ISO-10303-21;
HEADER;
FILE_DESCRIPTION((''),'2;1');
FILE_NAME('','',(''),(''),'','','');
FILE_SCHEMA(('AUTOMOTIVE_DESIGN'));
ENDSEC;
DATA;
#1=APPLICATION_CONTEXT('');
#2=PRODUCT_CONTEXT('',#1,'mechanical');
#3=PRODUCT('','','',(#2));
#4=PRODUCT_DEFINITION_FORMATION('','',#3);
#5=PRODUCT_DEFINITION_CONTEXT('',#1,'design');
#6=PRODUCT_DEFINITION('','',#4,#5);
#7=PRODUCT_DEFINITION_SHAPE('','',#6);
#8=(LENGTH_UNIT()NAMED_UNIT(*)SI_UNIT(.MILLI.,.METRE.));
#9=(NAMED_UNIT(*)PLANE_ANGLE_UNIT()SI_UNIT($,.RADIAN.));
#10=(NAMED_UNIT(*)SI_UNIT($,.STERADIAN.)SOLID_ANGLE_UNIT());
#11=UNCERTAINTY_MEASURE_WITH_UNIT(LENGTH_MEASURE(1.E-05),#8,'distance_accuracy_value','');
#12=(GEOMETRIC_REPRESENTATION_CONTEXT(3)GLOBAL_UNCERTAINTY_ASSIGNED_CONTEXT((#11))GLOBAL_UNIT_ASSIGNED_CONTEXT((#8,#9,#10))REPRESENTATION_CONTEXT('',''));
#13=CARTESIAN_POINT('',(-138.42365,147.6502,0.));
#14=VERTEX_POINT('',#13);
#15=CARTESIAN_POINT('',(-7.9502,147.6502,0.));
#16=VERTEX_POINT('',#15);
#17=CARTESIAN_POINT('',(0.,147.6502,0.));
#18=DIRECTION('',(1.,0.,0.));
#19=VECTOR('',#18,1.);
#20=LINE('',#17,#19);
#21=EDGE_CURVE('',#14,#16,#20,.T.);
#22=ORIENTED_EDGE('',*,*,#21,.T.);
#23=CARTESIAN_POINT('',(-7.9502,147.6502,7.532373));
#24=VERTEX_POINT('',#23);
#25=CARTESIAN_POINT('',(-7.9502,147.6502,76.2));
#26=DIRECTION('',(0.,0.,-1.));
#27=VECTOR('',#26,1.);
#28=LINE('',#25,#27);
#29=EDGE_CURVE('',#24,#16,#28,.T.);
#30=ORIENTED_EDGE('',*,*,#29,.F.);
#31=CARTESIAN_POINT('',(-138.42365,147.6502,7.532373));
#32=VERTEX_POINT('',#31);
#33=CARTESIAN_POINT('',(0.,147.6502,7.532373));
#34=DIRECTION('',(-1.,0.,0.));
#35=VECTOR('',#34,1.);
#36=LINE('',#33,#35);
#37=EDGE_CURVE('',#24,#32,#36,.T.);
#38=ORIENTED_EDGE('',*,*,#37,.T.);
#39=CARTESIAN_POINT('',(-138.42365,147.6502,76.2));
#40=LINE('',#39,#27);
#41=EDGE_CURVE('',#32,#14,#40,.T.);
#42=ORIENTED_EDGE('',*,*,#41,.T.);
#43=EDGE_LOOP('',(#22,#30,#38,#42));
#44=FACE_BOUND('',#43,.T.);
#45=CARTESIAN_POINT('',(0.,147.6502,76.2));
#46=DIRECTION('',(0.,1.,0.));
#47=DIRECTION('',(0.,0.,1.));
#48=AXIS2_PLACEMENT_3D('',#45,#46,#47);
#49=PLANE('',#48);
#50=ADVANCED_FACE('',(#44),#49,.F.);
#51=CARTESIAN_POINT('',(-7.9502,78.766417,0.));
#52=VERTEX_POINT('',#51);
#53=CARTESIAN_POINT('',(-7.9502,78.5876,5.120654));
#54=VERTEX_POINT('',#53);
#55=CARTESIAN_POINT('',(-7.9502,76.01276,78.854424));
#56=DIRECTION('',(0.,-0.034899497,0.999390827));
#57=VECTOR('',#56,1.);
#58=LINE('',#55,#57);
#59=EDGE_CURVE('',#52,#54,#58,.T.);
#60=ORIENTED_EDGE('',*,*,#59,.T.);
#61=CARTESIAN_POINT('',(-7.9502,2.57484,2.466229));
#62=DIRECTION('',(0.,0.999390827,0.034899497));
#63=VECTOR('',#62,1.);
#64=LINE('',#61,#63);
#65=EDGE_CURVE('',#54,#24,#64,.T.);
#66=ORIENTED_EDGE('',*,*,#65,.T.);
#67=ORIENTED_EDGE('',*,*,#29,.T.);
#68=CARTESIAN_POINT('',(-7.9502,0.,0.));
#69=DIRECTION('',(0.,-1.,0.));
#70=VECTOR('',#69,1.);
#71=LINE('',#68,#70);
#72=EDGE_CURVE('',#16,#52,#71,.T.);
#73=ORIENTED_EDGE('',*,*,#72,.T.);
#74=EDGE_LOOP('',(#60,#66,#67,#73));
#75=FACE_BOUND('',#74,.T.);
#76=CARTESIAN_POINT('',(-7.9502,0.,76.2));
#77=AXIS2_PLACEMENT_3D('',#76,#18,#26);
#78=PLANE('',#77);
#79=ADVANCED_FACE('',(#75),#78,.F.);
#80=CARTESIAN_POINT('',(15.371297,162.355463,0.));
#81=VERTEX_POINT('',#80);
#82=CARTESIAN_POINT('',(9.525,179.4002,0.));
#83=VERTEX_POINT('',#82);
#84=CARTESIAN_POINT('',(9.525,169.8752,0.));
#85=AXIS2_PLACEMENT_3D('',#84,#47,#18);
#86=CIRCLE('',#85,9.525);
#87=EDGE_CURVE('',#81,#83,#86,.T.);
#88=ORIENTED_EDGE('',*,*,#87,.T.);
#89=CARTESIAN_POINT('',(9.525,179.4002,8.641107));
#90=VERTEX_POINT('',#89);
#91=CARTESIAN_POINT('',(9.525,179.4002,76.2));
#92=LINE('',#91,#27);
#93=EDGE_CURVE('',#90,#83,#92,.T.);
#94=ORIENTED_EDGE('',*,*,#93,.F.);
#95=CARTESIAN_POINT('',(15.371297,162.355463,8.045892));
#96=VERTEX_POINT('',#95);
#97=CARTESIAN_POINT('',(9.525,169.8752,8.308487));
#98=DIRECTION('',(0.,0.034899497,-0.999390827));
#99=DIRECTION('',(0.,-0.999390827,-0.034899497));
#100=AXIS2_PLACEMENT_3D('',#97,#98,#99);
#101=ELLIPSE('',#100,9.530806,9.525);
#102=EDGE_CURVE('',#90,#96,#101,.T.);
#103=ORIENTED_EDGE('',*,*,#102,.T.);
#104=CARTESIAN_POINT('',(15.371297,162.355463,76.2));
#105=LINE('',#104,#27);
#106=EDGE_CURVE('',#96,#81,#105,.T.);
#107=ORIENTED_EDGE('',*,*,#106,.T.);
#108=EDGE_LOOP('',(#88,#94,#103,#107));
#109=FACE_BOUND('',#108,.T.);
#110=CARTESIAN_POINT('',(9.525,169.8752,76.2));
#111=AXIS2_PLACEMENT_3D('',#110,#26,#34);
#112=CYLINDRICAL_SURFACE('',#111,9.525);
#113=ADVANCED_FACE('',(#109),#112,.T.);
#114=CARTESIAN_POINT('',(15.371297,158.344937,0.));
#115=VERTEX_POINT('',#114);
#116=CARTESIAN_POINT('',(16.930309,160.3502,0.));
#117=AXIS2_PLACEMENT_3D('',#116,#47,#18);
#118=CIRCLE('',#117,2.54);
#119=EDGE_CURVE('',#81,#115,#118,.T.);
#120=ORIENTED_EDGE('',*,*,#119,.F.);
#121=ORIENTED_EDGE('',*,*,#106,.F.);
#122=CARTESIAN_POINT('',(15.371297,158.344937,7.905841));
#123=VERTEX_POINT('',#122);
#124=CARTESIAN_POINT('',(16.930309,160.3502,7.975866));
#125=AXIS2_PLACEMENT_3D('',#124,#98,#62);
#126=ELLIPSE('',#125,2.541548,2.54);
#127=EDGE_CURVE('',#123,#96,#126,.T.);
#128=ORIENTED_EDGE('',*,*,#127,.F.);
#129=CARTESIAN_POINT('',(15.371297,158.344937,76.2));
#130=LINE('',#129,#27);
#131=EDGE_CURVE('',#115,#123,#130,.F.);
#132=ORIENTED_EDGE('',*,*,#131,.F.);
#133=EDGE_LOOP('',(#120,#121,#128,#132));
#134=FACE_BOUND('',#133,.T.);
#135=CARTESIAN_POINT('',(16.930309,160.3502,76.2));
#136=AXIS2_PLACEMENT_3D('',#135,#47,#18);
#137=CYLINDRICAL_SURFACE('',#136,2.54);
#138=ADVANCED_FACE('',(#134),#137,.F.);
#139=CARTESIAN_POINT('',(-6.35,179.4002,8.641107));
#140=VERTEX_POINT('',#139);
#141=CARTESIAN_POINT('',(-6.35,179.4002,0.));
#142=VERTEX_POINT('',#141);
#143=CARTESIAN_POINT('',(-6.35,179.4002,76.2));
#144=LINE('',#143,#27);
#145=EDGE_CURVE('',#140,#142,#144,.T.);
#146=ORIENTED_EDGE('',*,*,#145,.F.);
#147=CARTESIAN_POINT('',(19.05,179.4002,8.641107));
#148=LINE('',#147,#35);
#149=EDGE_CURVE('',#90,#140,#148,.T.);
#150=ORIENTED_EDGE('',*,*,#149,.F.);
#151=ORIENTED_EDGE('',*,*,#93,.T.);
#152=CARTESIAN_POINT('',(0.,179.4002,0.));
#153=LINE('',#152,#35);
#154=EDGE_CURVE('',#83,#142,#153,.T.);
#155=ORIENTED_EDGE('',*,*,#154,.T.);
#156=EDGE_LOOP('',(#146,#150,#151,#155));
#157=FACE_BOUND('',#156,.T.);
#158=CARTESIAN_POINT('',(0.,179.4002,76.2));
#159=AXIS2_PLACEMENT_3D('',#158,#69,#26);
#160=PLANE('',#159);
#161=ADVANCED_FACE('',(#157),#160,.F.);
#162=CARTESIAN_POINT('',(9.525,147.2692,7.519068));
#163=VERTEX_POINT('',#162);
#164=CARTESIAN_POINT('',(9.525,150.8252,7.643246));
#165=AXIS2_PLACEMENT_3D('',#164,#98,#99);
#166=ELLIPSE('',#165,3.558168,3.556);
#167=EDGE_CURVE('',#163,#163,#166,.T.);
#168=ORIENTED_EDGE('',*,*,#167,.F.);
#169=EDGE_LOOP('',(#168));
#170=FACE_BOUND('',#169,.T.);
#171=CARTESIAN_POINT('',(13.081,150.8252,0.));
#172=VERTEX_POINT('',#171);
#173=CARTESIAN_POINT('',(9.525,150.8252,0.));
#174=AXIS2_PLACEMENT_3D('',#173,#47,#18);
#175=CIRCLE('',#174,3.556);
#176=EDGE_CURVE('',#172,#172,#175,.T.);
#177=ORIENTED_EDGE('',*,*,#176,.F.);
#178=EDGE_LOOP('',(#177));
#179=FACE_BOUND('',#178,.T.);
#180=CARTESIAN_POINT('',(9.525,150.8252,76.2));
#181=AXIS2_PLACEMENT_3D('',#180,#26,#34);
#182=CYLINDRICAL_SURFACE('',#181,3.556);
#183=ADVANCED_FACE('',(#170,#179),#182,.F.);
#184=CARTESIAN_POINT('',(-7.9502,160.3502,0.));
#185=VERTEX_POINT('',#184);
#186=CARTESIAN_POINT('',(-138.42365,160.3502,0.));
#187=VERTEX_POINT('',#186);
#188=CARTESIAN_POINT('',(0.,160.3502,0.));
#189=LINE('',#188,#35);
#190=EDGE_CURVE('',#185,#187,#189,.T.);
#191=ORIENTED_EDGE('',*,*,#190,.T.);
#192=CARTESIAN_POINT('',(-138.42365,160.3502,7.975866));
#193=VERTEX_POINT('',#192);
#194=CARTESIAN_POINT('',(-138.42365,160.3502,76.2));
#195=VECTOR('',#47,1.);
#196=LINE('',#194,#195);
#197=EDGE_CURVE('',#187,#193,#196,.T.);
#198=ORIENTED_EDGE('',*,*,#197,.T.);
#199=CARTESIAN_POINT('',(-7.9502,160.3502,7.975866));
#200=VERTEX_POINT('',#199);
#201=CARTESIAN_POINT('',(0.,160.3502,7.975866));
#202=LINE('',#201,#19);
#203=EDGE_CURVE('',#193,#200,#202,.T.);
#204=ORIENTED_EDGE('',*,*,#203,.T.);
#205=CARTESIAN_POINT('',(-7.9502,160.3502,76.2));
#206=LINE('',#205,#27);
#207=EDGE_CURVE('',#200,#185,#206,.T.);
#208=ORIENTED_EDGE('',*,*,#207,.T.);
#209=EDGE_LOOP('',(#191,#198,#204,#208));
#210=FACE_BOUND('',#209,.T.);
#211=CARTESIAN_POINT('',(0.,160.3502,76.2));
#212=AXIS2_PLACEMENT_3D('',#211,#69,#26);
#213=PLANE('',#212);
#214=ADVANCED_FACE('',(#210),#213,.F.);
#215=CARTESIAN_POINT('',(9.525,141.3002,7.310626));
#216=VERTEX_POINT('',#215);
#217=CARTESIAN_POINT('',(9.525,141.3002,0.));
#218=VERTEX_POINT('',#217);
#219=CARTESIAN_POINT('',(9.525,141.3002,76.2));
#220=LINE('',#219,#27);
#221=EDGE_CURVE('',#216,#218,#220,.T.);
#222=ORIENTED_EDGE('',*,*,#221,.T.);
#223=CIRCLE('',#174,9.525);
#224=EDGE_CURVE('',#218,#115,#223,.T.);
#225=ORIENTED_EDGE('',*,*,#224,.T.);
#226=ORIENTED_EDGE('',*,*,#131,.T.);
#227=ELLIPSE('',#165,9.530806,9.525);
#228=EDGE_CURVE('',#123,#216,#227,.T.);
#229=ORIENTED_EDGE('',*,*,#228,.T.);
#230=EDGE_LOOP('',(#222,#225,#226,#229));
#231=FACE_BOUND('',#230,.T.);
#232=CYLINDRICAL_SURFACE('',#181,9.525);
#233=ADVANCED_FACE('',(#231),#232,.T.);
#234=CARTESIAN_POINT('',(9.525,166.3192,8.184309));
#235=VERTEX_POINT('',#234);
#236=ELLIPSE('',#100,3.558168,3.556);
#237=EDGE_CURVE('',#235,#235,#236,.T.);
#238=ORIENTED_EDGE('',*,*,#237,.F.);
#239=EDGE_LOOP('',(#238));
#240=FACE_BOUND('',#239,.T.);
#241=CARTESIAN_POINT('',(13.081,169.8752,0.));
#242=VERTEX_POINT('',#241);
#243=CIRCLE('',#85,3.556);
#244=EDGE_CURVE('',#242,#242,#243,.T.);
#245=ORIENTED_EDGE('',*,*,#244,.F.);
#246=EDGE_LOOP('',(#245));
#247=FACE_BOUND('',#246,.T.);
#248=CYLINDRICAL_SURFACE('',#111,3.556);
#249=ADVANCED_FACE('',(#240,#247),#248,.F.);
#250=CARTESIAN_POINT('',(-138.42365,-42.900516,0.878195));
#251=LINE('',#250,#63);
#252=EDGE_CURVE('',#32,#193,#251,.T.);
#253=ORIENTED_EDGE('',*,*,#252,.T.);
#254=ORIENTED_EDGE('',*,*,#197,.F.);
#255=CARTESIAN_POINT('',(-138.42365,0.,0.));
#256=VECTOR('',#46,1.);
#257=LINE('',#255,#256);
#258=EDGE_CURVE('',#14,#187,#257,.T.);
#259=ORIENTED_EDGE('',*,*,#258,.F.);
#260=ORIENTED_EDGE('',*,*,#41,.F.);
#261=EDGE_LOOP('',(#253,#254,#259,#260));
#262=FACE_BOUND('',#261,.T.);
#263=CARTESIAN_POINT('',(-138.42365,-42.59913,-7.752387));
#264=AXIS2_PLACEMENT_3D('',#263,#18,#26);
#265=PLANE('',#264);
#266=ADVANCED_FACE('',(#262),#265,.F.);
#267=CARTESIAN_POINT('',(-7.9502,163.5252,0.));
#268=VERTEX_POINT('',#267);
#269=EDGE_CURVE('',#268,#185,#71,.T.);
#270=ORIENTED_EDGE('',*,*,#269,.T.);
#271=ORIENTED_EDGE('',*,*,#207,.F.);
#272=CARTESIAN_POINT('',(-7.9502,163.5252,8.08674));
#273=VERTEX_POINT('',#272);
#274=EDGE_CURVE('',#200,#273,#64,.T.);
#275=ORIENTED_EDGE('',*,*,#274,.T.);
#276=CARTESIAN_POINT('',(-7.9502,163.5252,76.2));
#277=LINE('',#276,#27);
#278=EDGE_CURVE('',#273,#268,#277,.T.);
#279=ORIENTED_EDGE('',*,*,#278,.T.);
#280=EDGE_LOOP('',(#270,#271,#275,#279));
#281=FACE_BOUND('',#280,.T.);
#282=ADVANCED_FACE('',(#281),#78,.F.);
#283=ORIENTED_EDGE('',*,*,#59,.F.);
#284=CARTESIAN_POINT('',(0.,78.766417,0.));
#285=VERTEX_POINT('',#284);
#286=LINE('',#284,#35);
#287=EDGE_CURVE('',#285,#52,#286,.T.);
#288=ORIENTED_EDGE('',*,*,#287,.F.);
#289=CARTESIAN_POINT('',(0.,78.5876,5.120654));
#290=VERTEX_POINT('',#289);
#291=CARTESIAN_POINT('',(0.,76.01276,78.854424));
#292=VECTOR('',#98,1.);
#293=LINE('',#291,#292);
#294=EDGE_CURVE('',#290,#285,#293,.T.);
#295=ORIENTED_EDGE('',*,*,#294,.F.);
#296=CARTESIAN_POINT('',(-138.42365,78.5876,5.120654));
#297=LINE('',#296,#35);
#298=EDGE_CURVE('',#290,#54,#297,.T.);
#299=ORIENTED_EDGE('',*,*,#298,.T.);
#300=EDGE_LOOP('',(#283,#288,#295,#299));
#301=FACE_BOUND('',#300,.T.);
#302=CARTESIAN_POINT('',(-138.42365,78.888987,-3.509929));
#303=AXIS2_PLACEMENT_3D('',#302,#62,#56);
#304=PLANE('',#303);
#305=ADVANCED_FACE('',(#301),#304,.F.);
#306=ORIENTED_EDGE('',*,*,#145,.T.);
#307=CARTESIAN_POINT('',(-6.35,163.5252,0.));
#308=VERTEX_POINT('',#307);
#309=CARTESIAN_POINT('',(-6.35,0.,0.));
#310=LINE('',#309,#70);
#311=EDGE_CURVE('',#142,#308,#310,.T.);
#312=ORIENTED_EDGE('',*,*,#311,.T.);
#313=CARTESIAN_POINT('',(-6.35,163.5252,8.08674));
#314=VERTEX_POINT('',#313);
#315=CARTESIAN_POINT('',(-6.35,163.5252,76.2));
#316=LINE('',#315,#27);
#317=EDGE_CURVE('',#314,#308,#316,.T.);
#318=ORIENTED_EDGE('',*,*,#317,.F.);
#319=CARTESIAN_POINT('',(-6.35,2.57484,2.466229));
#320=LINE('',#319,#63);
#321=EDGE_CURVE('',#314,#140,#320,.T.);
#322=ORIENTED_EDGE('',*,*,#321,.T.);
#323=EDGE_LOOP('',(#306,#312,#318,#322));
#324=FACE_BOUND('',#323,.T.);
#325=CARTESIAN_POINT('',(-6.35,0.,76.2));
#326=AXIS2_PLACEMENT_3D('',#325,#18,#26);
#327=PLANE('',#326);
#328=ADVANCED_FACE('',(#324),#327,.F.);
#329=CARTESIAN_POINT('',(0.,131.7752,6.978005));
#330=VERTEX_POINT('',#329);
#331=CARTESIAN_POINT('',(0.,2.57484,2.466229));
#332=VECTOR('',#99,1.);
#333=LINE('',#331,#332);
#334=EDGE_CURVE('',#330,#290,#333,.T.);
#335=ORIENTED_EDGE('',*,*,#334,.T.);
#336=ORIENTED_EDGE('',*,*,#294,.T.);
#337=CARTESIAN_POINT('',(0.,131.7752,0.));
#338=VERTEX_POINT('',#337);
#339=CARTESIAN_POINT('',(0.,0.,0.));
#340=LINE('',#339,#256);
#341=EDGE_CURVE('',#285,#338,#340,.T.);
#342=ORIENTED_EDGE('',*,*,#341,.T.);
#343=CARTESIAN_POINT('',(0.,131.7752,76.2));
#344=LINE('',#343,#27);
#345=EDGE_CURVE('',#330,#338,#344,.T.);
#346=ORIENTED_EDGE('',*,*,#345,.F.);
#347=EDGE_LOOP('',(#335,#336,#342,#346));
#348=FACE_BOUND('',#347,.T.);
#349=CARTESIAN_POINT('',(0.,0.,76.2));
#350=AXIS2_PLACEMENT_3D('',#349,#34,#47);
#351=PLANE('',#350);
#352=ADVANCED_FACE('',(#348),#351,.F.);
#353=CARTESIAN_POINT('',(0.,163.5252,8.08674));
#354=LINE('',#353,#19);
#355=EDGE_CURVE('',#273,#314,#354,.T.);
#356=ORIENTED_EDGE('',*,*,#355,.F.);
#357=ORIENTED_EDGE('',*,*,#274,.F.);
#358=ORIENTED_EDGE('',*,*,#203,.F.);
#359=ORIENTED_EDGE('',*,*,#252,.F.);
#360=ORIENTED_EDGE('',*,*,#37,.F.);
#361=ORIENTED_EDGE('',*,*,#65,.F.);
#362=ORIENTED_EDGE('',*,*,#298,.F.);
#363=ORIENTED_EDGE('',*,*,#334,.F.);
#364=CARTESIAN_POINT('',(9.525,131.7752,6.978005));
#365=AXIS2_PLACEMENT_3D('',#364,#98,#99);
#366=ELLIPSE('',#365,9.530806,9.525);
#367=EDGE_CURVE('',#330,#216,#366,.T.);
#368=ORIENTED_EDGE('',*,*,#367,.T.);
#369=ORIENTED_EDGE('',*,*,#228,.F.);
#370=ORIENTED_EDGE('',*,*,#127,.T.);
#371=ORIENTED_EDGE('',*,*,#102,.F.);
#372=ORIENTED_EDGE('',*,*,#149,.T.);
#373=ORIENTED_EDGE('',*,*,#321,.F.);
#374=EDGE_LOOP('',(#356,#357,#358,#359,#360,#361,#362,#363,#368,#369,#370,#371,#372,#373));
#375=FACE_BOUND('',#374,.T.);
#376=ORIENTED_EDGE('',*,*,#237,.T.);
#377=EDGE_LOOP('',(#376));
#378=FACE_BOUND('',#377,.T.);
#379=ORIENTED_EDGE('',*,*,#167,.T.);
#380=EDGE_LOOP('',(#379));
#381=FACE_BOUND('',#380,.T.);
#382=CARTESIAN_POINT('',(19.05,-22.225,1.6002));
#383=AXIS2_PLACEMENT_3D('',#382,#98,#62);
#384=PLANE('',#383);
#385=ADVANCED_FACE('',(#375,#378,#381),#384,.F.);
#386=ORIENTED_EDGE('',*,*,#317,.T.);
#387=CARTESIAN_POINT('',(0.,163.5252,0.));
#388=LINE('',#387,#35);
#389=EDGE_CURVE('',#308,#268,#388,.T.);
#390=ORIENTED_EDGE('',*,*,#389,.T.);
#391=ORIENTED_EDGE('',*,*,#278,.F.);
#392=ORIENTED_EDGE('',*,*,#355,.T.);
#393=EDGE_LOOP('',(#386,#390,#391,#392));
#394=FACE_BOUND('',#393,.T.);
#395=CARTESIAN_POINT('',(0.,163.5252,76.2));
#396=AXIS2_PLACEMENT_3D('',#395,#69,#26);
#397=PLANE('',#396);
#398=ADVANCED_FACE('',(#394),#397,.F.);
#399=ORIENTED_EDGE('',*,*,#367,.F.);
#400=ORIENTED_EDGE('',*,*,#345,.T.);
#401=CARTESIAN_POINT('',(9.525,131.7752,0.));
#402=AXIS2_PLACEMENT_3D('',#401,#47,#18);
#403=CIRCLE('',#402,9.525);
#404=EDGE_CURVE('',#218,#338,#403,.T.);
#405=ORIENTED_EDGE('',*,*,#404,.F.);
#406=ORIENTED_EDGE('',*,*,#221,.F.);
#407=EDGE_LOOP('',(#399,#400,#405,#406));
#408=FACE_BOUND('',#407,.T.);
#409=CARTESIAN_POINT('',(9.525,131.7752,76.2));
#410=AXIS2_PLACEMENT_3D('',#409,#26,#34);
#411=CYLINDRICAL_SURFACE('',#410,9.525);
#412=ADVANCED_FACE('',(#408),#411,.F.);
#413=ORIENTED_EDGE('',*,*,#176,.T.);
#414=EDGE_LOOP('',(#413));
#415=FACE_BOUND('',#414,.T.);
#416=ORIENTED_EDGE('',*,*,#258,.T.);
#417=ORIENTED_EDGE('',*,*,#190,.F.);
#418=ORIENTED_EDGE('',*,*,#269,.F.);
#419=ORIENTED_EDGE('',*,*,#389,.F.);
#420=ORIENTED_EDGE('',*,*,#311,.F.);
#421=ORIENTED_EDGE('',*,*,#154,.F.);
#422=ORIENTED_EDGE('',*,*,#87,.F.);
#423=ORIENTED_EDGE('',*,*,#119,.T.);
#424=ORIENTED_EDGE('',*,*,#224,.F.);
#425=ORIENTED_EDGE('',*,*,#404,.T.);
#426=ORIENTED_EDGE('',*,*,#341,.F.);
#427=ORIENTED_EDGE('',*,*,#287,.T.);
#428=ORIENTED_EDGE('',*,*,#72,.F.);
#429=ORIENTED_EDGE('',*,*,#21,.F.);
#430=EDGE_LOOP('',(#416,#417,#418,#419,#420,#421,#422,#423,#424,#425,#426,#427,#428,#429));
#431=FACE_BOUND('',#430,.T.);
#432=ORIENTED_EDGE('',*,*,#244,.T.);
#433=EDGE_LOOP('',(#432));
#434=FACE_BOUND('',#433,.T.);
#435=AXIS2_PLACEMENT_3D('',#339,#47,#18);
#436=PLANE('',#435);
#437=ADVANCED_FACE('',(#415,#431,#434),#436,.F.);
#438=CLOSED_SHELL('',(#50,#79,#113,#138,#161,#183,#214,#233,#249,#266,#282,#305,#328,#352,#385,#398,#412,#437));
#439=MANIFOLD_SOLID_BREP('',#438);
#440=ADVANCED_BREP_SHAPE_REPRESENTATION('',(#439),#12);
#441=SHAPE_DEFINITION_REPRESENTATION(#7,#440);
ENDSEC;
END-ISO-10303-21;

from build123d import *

# Parameters (mm, degrees)
BOSS_EXTRUDE1_OUTLINE_R = 3.556
BOSS_EXTRUDE1_OUTLINE_W = 260.9469
BOSS_EXTRUDE1_OUTLINE_H = 138.1252
BOSS_EXTRUDE1_DEPTH     = 76.2
CUT_EXTRUDE1_DEPTH      = 355.32482824
CUT_EXTRUDE1_DEPTH_BACK = 355.32482824
FILLET1_R               = 2.54
SKETCH7_W               = 260.9469
SKETCH7_H               = 22.1996
CUT_EXTRUDE2_DEPTH      = 347.152897849
FILLET2_R               = 6.35
SKETCH8_W               = 190.775627824
SKETCH8_H               = 235.521960295
CUT_EXTRUDE4_DEPTH      = 347.144751077
SKETCH9_W               = 165.75862987
SKETCH9_H               = 108.368614936
CUT_EXTRUDE5_DEPTH      = 227.747805823


# Read off the part's stored shape, not the designer's step: Boss-Extrude1
with BuildPart() as part:
    # Boss-Extrude1 outline → Boss-Extrude1 (new body)
    with BuildSketch(Plane.XY):
        with BuildLine():
            Line((-286.3596, -22.225), (9.525, -22.225))
            ThreePointArc((9.525, -22.225), (19.05, -12.7), (9.525, -3.175))
            ThreePointArc((9.525, -3.175), (19.05, 6.35), (9.525, 15.875))
            ThreePointArc((9.525, 15.875), (2.789807909, 18.664807909), (0, 25.4))
            Line((0, 25.4), (0, 131.7752))
            ThreePointArc((0, 131.7752), (2.789807909, 138.510392091), (9.525, 141.3002))
            ThreePointArc((9.525, 141.3002), (19.05, 150.8252), (9.525, 160.3502))
            ThreePointArc((9.525, 160.3502), (19.05, 169.8752), (9.525, 179.4002))
            Line((9.525, 179.4002), (-6.35, 179.4002))
            Line((-6.35, 179.4002), (-6.35, 163.5252))
            Line((-6.35, 163.5252), (-7.9502, 163.5252))
            Line((-7.9502, 163.5252), (-7.9502, 160.3502))
            Line((-7.9502, 160.3502), (-268.9098, 160.3502))
            Line((-268.9098, 160.3502), (-268.9098, 163.5252))
            Line((-268.9098, 163.5252), (-270.51, 163.5252))
            Line((-270.51, 163.5252), (-270.51, 179.4002))
            Line((-270.51, 179.4002), (-286.385, 179.4002))
            ThreePointArc((-286.385, 179.4002), (-295.91, 169.8752), (-286.385, 160.3502))
            ThreePointArc((-286.385, 160.3502), (-295.897297883, 150.818850004), (-286.3723, 141.3002))
            ThreePointArc((-286.3723, 141.3002), (-279.637107909, 138.510392091), (-276.8473, 131.7752))
            Line((-276.8473, 131.7752), (-276.8473, 25.4))
            ThreePointArc((-276.8473, 25.4), (-279.637107909, 18.664807909), (-286.3723, 15.875))
            ThreePointArc((-286.3723, 15.875), (-295.8973, 6.35), (-286.3723, -3.175))
            ThreePointArc((-286.3723, -3.175), (-295.884597883, -12.706349996), (-286.3596, -22.225))
        make_face()
        with Locations((-286.3596, -12.7)):
            Circle(BOSS_EXTRUDE1_OUTLINE_R, mode=Mode.SUBTRACT)
        with Locations((-286.3723, 6.35)):
            Circle(BOSS_EXTRUDE1_OUTLINE_R, mode=Mode.SUBTRACT)
        with Locations((9.525, -12.7)):
            Circle(BOSS_EXTRUDE1_OUTLINE_R, mode=Mode.SUBTRACT)
        with Locations((9.525, 6.35)):
            Circle(BOSS_EXTRUDE1_OUTLINE_R, mode=Mode.SUBTRACT)
        with Locations((-286.3723, 150.8252)):
            Circle(BOSS_EXTRUDE1_OUTLINE_R, mode=Mode.SUBTRACT)
        with Locations((-286.385, 169.8752)):
            Circle(BOSS_EXTRUDE1_OUTLINE_R, mode=Mode.SUBTRACT)
        with Locations((-138.42365, 78.5876)):
            Rectangle(BOSS_EXTRUDE1_OUTLINE_W, BOSS_EXTRUDE1_OUTLINE_H, mode=Mode.SUBTRACT)
        with Locations((9.525, 150.8252)):
            Circle(BOSS_EXTRUDE1_OUTLINE_R, mode=Mode.SUBTRACT)
        with Locations((9.525, 169.8752)):
            Circle(BOSS_EXTRUDE1_OUTLINE_R, mode=Mode.SUBTRACT)
    extrude(amount=BOSS_EXTRUDE1_DEPTH)

    # Sketch5 → Cut-Extrude1 (cut, two sides: drawn at the far end of the back side and taken through both)
    with BuildSketch(Plane.ZY.offset(276.8473).offset(-CUT_EXTRUDE1_DEPTH_BACK)):
        Polygon((1.6002, -22.225), (8.641107133, 179.4002), (76.2, 179.4002), (76.2, -22.225), align=None)
    extrude(amount=CUT_EXTRUDE1_DEPTH + CUT_EXTRUDE1_DEPTH_BACK, mode=Mode.SUBTRACT)

    # Fillet1
    fillet1_edges = [part.edges().sort_by_distance(p)[0] for p in [
        (-286.385, 160.3502, 3.987933237),
        (-286.3723, -3.175, 1.132720329),
        (9.525, -3.175, 1.132720329),
        (9.525, 160.3502, 3.987933237),
    ]]
    fillet(fillet1_edges, radius=FILLET1_R)

    # Sketch7 → Cut-Extrude2 (cut, through all)
    with BuildSketch(Plane(origin=(0, 0, 0), x_dir=(-1, 0, 0), z_dir=(0, 0, -1))):
        with Locations((138.42365, -6.35)):
            Rectangle(SKETCH7_W, SKETCH7_H)
    extrude(amount=-CUT_EXTRUDE2_DEPTH, mode=Mode.SUBTRACT)

    # Fillet2
    fillet2_edges = [part.edges().sort_by_distance(p)[0] for p in [
        (-268.8971, 4.7498, 1.271090386),
        (-268.8971, -17.4498, 0.883476829),
        (-7.9502, -17.4498, 0.883476829),
        (-7.9502, 4.7498, 1.271090386),
    ]]
    fillet(fillet2_edges, radius=FILLET2_R)

    # Sketch8 → Cut-Extrude4 (cut, through all)
    with BuildSketch(Plane(origin=(0, -0.082881646, 2.373419811), x_dir=(1, 0, 0), z_dir=(0, -0.03489949670250444, 0.9993908270190958))):
        with Locations((-233.811463912, 74.917246318)):
            Rectangle(SKETCH8_W, SKETCH8_H)
    extrude(amount=-CUT_EXTRUDE4_DEPTH, mode=Mode.SUBTRACT)

    # Sketch9 → Cut-Extrude5 (cut, through all)
    with BuildSketch(Plane(origin=(0, -0.082881646, 2.373419811), x_dir=(1, 0, 0), z_dir=(0, -0.03489949670250444, 0.9993908270190958))):
        with Locations((-55.544335065, 24.534127322)):
            Rectangle(SKETCH9_W, SKETCH9_H)
    extrude(amount=-CUT_EXTRUDE5_DEPTH, mode=Mode.SUBTRACT)


solid = part.part
